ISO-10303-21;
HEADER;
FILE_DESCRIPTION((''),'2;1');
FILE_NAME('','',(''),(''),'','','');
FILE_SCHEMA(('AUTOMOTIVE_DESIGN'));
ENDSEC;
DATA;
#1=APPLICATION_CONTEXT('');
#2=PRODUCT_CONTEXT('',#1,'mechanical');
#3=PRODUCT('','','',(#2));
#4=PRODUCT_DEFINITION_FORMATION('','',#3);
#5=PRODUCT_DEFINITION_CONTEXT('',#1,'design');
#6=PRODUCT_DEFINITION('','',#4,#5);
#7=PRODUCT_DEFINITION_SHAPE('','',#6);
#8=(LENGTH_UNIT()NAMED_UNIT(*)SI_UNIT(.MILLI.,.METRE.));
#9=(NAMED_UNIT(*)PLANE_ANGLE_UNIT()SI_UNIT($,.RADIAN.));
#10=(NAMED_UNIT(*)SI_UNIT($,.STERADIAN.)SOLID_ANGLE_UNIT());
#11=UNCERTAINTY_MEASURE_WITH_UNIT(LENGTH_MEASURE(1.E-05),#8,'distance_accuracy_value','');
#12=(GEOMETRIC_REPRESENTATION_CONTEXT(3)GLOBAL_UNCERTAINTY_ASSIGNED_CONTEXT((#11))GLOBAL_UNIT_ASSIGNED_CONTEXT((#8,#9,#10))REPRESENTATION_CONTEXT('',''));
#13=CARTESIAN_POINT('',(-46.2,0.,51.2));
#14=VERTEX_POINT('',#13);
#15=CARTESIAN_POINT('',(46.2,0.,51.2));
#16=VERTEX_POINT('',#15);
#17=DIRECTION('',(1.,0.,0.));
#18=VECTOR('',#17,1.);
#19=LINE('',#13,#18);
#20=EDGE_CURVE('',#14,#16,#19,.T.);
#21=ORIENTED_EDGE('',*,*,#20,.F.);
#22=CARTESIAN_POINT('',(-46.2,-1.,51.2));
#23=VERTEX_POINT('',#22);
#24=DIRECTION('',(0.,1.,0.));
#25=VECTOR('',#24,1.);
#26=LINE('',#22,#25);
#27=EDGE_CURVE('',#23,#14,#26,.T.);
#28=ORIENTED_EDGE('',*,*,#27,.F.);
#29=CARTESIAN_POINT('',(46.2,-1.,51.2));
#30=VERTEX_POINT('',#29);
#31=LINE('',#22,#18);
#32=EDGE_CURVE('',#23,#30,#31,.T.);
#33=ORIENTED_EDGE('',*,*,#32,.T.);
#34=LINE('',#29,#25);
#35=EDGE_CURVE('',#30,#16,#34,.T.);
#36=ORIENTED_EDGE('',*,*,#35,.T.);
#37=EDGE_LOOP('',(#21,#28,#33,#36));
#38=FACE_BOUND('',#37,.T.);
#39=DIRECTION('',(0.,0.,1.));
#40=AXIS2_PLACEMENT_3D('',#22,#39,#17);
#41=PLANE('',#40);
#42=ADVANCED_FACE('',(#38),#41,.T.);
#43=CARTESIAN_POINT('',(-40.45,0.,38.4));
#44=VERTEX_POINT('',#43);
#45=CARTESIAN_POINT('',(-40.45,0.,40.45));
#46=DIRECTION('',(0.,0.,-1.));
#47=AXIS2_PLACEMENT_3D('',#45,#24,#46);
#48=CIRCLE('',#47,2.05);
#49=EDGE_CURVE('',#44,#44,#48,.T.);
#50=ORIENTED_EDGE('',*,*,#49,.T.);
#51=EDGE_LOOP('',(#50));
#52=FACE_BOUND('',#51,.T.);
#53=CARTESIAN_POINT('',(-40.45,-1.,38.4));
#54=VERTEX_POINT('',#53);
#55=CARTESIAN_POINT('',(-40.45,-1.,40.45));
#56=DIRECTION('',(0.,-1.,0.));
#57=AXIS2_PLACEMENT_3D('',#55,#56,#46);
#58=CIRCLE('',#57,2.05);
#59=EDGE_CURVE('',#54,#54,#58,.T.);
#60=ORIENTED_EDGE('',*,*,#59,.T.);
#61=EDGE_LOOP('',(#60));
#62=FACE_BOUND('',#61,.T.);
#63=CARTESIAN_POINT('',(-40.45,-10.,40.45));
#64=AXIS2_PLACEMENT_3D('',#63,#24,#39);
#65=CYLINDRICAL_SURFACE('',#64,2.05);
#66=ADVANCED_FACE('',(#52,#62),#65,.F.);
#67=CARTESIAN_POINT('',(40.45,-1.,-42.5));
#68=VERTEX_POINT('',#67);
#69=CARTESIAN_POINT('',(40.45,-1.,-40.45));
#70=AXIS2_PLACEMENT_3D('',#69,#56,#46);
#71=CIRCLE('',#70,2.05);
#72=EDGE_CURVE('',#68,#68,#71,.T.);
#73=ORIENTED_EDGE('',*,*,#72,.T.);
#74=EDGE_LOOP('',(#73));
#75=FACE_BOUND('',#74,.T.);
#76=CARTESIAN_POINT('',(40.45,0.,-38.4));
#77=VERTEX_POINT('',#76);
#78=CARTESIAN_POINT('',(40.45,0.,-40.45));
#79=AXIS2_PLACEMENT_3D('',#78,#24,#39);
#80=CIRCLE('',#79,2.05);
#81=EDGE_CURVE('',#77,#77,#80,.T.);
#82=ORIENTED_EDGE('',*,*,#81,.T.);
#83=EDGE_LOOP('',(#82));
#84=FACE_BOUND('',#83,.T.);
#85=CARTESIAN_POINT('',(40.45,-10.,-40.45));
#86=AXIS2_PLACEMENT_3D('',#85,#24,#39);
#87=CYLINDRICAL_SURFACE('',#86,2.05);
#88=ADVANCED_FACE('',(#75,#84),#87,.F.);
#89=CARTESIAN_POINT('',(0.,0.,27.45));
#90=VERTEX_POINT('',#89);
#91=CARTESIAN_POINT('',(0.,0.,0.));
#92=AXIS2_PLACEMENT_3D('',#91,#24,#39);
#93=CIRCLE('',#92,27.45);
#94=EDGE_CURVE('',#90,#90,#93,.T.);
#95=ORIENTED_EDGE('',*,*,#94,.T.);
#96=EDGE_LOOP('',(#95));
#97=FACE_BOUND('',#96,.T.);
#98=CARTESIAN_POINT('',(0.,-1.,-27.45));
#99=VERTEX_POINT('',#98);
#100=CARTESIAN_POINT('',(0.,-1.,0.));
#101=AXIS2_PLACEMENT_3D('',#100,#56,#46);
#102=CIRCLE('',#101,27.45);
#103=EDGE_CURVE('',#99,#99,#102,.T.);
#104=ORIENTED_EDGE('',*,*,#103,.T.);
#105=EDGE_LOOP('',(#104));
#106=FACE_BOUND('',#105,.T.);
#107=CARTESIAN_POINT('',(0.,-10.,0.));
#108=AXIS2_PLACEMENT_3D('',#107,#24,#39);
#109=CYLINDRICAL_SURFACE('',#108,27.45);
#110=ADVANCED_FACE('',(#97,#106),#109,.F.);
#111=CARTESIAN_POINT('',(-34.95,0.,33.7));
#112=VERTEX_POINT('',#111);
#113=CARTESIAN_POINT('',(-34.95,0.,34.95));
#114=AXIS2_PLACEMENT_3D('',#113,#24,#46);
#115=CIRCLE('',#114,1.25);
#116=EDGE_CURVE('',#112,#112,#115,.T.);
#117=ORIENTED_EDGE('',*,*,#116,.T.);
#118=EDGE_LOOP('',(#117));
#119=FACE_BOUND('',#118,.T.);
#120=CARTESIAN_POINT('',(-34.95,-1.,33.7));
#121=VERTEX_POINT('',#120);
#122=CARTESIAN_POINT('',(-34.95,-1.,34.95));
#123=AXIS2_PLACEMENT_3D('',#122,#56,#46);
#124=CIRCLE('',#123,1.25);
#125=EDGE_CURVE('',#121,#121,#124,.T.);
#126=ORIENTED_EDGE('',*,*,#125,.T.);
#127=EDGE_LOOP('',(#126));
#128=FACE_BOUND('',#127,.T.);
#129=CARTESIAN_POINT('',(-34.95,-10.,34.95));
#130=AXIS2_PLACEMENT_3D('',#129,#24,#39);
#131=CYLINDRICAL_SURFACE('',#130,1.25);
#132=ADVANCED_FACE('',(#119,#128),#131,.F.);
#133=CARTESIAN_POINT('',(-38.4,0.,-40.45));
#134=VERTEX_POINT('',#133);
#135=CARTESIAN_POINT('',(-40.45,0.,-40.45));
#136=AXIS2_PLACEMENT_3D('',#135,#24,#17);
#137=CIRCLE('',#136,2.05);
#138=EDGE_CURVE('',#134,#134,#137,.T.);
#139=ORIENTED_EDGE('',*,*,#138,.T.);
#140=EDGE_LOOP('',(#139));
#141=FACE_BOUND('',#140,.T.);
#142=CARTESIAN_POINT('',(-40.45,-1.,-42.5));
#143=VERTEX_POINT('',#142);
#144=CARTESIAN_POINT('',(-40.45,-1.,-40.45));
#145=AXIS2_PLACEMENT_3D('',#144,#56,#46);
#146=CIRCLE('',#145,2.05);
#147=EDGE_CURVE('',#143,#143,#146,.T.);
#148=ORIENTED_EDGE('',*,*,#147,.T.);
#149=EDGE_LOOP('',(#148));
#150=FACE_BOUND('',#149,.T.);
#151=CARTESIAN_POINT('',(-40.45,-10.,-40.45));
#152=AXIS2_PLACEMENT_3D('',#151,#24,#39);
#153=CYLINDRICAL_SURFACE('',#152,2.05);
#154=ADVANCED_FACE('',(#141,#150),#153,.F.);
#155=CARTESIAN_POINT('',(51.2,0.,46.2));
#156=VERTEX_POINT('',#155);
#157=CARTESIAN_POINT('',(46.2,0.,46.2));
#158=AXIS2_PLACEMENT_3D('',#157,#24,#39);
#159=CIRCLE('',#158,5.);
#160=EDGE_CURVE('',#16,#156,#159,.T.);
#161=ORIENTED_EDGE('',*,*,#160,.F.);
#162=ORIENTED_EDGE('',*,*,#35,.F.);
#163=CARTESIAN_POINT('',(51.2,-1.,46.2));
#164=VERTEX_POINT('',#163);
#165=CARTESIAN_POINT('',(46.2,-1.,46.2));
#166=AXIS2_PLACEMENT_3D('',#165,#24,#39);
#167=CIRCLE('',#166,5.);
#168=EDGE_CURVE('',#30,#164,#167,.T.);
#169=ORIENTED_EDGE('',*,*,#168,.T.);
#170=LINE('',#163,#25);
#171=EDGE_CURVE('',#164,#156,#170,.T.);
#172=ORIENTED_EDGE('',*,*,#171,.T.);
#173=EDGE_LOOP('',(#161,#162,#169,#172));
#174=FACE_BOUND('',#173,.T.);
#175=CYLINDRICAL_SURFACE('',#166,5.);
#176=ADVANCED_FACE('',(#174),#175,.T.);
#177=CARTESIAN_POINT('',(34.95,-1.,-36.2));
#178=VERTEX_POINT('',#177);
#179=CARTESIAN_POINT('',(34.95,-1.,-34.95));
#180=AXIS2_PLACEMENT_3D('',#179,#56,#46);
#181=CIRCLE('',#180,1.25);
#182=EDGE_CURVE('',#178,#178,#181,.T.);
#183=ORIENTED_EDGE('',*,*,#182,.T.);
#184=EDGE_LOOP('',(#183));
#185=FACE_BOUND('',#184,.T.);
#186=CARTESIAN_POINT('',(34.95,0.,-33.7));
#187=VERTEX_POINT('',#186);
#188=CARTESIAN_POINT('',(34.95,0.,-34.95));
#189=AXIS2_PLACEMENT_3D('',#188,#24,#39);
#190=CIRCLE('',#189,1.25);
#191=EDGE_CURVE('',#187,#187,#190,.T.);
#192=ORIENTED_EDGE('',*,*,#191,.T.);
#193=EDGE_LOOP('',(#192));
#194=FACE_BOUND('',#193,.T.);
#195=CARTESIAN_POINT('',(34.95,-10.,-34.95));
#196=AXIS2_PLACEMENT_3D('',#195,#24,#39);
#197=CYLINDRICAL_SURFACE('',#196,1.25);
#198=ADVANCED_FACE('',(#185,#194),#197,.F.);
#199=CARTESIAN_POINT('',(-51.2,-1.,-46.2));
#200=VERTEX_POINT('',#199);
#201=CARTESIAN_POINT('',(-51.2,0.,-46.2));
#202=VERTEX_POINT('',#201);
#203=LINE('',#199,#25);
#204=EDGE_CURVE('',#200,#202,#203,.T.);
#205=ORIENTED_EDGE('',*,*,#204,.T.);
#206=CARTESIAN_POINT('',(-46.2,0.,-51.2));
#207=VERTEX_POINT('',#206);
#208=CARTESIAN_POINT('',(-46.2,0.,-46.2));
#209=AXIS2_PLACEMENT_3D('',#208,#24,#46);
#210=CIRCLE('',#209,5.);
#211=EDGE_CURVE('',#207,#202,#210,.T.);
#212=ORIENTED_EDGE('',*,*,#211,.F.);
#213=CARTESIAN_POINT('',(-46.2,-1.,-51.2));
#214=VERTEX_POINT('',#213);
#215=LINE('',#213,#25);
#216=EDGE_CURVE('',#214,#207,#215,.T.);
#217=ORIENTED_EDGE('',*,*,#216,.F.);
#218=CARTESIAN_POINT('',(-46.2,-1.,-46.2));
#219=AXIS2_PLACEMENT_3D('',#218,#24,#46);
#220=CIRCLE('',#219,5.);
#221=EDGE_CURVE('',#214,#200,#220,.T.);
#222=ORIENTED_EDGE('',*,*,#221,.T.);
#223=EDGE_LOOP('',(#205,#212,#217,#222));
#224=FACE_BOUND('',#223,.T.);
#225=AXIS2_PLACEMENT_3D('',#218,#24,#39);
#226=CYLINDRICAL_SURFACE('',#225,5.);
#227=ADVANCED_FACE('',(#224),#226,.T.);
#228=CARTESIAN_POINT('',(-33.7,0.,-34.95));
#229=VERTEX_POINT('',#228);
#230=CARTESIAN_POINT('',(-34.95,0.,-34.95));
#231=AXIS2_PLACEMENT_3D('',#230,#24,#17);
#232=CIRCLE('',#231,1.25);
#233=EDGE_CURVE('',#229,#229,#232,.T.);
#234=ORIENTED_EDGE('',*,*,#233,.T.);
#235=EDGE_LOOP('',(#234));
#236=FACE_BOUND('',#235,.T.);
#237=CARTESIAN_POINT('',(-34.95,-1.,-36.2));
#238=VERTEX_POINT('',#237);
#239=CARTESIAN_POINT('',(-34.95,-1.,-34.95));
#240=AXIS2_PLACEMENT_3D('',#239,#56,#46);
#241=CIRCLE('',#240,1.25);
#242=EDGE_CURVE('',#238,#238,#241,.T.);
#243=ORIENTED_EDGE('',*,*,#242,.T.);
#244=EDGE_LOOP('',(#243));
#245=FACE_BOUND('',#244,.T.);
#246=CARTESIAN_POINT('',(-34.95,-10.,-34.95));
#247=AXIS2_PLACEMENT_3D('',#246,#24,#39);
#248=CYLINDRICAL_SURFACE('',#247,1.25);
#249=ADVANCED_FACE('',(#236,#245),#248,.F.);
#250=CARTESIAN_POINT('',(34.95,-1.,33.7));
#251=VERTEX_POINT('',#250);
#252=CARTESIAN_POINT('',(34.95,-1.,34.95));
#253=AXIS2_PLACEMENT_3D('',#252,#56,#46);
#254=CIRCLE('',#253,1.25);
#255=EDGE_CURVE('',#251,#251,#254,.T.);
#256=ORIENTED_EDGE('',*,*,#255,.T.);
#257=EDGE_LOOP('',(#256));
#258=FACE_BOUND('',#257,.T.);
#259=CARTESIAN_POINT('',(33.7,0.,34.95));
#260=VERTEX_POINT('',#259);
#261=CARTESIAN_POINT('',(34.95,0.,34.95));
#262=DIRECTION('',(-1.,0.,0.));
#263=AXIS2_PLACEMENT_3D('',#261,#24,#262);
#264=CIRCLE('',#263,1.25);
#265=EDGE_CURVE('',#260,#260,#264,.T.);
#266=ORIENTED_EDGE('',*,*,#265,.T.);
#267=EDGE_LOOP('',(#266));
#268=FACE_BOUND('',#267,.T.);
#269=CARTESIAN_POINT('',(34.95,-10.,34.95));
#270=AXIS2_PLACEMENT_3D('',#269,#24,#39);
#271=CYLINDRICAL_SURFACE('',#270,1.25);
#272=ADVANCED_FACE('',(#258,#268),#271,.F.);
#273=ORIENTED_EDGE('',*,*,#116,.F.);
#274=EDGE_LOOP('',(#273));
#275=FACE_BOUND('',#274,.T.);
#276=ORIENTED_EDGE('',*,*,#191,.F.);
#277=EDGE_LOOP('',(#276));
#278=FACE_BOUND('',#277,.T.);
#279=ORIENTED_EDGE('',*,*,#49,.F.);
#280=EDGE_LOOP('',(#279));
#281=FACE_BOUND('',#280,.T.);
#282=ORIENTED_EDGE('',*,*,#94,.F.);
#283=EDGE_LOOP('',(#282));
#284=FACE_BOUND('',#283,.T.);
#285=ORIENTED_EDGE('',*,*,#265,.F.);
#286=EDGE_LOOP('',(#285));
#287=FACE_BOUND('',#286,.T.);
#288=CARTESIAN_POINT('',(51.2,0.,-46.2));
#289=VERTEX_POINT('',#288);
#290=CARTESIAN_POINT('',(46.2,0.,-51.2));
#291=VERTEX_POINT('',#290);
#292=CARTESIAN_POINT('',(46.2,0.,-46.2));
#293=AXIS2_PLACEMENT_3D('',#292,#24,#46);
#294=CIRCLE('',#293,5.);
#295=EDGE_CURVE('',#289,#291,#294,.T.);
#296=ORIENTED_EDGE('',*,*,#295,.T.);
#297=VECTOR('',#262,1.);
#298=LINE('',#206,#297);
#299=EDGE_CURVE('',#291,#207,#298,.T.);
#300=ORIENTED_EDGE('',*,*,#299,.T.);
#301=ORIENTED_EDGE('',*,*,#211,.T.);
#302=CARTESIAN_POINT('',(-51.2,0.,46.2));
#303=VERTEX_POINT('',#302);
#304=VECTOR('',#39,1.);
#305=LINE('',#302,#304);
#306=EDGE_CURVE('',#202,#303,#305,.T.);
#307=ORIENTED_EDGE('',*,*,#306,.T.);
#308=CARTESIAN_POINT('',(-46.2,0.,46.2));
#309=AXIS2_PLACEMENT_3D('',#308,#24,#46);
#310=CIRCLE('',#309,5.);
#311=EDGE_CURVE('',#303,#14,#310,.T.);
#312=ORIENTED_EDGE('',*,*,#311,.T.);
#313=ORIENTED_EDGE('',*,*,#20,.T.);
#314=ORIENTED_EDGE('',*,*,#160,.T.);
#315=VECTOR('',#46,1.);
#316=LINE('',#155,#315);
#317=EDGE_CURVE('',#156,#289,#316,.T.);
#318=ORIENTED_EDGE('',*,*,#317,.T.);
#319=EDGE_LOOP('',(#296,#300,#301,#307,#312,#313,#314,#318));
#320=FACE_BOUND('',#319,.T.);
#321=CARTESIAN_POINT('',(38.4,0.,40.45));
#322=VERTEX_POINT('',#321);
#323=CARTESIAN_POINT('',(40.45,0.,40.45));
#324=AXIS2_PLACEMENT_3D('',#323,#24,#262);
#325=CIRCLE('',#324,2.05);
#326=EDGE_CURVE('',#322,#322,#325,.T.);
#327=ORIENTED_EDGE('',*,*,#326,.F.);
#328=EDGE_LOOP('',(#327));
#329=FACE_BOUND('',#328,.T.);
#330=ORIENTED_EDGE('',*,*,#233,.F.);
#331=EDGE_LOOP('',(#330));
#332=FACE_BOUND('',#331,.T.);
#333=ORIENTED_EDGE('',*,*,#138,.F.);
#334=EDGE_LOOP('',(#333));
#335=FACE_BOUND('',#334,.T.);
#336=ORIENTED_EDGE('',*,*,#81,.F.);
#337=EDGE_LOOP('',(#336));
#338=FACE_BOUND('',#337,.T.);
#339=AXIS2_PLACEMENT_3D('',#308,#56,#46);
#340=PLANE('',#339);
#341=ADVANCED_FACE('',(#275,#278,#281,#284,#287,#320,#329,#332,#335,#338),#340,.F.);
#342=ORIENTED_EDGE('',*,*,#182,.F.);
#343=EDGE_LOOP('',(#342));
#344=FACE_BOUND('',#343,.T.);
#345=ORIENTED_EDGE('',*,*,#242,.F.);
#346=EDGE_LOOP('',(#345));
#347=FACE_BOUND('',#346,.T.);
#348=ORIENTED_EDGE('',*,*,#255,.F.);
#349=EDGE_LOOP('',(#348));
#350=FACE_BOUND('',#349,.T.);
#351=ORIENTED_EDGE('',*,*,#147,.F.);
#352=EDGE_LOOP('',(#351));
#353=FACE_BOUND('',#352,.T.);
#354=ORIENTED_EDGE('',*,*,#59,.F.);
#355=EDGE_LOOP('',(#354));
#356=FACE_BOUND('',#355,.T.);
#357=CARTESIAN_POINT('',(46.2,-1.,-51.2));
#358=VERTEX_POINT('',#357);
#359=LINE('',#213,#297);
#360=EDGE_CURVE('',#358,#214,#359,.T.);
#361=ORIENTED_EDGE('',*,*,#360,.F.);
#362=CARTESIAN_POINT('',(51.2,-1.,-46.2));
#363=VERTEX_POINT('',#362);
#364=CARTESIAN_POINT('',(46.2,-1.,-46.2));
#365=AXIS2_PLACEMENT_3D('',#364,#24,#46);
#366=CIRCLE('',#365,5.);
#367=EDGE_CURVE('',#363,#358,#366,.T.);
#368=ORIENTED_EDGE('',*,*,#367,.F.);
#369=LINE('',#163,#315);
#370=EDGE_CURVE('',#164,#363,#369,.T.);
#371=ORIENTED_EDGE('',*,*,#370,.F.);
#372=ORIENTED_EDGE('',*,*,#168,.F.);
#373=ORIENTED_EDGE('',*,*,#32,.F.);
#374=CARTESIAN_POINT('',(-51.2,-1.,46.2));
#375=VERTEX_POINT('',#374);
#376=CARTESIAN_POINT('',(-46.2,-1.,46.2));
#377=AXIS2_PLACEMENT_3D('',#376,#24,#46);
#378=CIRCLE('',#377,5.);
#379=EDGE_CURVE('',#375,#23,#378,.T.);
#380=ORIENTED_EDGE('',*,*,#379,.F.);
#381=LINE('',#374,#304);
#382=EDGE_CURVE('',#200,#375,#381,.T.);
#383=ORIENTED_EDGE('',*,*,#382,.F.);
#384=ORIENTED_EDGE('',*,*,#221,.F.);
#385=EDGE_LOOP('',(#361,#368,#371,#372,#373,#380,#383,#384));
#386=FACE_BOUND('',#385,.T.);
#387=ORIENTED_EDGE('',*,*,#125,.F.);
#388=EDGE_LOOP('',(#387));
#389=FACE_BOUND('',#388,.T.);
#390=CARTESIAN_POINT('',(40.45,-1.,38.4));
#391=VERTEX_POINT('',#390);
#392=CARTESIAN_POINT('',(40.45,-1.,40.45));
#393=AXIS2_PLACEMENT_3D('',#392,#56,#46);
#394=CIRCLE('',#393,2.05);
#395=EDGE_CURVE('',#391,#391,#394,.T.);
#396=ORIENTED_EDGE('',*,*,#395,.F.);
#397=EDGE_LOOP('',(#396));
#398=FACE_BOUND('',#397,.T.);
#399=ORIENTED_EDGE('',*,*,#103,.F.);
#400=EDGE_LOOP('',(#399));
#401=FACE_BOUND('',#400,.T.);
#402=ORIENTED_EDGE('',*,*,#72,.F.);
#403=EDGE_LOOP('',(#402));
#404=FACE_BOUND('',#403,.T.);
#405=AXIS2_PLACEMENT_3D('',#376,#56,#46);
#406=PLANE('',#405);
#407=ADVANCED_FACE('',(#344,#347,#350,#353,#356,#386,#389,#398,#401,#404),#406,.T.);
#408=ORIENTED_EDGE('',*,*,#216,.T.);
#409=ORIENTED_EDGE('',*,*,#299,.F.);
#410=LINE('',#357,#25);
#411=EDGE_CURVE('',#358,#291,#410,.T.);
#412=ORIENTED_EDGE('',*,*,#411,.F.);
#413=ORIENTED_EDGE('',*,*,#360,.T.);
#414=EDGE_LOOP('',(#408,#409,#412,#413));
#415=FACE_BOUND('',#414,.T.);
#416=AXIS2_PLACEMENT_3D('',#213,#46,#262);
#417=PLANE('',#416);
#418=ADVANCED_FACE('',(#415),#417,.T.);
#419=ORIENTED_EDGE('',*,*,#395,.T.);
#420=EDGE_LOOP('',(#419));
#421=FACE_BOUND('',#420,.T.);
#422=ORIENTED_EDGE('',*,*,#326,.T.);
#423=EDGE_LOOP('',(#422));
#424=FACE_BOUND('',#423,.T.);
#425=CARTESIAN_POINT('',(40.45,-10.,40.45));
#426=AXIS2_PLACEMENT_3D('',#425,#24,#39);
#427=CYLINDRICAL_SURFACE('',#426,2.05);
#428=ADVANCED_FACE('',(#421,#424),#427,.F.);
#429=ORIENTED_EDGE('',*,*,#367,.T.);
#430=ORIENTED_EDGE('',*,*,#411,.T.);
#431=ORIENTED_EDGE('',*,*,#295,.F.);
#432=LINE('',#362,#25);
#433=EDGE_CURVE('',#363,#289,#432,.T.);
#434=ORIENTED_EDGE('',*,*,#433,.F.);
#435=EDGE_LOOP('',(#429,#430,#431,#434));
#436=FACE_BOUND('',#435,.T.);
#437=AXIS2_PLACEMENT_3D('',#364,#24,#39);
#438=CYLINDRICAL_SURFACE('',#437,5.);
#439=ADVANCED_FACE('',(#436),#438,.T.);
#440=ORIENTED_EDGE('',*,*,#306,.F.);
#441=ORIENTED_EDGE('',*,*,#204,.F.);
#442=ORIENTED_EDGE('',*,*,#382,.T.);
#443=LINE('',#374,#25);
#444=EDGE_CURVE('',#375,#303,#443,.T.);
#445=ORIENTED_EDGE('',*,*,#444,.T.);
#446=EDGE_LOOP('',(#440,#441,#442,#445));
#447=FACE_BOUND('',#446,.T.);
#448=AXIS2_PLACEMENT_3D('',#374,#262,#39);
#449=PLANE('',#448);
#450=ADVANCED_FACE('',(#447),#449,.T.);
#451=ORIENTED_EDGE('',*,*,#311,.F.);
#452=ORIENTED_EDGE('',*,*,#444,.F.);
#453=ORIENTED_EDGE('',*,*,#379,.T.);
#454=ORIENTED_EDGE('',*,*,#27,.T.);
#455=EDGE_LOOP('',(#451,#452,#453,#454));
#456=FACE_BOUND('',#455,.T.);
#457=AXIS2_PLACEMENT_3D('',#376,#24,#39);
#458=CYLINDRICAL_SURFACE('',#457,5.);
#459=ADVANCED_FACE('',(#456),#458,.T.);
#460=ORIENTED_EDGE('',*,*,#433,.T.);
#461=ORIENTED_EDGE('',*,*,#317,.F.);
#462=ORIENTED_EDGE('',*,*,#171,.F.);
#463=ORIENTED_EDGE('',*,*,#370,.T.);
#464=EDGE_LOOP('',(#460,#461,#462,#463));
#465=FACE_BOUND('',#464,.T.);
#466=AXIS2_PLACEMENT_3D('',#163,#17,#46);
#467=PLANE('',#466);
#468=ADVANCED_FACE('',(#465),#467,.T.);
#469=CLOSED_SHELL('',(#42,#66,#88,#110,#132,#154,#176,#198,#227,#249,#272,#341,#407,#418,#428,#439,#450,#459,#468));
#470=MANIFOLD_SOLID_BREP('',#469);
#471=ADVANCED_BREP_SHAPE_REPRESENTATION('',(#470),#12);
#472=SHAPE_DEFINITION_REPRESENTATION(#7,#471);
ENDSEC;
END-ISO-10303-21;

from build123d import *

# Parameters (mm, degrees)
BASE_FLANGE1_DEPTH = 1
SKETCH6_R          = 27.45
CUT_EXTRUDE1_DEPTH = 10
SKETCH8_R          = 2.05
SKETCH8_R_2        = 1.25
CUT_EXTRUDE2_DEPTH = 10
CIRPATTERN1_COUNT  = 4


# Sheet-metal steps are written as plain solids
with BuildPart() as part:
    # Sketch1 → Base-Flange1 (new body)
    with BuildSketch(Plane(origin=(0, 0, 0), x_dir=(1, 0, 0), z_dir=(0, 1, 0))):
        with BuildLine():
            Line((-46.2, -51.2), (46.2, -51.2))
            ThreePointArc((46.2, -51.2), (49.735533906, -49.735533906), (51.2, -46.2))
            Line((51.2, -46.2), (51.2, 46.2))
            ThreePointArc((51.2, 46.2), (49.735533906, 49.735533906), (46.2, 51.2))
            Line((46.2, 51.2), (-46.2, 51.2))
            ThreePointArc((-46.2, 51.2), (-49.735533906, 49.735533906), (-51.2, 46.2))
            Line((-51.2, 46.2), (-51.2, -46.2))
            ThreePointArc((-51.2, -46.2), (-49.735533906, -49.735533906), (-46.2, -51.2))
        make_face()
    extrude(amount=-BASE_FLANGE1_DEPTH)

    # Sketch6 → Cut-Extrude1 (cut)
    with BuildSketch(Plane(origin=(0, 0, 0), x_dir=(1, 0, 0), z_dir=(0, 1, 0))):
        with Locations(Location((0, 0, 0), (0, 0, 270))):
            Circle(SKETCH6_R)
    extrude(amount=-CUT_EXTRUDE1_DEPTH, mode=Mode.SUBTRACT)

    # Sketch8 → Cut-Extrude2 (cut)
    with BuildSketch(Plane(origin=(0, 0, 0), x_dir=(1, 0, 0), z_dir=(0, 1, 0))):
        with Locations(Location((40.45, 40.45, 0), (0, 0, 270))):
            Circle(SKETCH8_R)
        with Locations(Location((34.95, 34.95, 0), (0, 0, 270))):
            Circle(SKETCH8_R_2)
    cut_extrude2 = extrude(amount=-CUT_EXTRUDE2_DEPTH, mode=Mode.SUBTRACT)

    # CirPattern1: Cut-Extrude2 ×4 about axis
    cirpattern1_axis = Axis((0, 0, 0), (0, 1, 0))
    for i in range(1, CIRPATTERN1_COUNT):
        add(cut_extrude2.rotate(cirpattern1_axis, i * 360 / CIRPATTERN1_COUNT), mode=Mode.SUBTRACT)


solid = part.part
